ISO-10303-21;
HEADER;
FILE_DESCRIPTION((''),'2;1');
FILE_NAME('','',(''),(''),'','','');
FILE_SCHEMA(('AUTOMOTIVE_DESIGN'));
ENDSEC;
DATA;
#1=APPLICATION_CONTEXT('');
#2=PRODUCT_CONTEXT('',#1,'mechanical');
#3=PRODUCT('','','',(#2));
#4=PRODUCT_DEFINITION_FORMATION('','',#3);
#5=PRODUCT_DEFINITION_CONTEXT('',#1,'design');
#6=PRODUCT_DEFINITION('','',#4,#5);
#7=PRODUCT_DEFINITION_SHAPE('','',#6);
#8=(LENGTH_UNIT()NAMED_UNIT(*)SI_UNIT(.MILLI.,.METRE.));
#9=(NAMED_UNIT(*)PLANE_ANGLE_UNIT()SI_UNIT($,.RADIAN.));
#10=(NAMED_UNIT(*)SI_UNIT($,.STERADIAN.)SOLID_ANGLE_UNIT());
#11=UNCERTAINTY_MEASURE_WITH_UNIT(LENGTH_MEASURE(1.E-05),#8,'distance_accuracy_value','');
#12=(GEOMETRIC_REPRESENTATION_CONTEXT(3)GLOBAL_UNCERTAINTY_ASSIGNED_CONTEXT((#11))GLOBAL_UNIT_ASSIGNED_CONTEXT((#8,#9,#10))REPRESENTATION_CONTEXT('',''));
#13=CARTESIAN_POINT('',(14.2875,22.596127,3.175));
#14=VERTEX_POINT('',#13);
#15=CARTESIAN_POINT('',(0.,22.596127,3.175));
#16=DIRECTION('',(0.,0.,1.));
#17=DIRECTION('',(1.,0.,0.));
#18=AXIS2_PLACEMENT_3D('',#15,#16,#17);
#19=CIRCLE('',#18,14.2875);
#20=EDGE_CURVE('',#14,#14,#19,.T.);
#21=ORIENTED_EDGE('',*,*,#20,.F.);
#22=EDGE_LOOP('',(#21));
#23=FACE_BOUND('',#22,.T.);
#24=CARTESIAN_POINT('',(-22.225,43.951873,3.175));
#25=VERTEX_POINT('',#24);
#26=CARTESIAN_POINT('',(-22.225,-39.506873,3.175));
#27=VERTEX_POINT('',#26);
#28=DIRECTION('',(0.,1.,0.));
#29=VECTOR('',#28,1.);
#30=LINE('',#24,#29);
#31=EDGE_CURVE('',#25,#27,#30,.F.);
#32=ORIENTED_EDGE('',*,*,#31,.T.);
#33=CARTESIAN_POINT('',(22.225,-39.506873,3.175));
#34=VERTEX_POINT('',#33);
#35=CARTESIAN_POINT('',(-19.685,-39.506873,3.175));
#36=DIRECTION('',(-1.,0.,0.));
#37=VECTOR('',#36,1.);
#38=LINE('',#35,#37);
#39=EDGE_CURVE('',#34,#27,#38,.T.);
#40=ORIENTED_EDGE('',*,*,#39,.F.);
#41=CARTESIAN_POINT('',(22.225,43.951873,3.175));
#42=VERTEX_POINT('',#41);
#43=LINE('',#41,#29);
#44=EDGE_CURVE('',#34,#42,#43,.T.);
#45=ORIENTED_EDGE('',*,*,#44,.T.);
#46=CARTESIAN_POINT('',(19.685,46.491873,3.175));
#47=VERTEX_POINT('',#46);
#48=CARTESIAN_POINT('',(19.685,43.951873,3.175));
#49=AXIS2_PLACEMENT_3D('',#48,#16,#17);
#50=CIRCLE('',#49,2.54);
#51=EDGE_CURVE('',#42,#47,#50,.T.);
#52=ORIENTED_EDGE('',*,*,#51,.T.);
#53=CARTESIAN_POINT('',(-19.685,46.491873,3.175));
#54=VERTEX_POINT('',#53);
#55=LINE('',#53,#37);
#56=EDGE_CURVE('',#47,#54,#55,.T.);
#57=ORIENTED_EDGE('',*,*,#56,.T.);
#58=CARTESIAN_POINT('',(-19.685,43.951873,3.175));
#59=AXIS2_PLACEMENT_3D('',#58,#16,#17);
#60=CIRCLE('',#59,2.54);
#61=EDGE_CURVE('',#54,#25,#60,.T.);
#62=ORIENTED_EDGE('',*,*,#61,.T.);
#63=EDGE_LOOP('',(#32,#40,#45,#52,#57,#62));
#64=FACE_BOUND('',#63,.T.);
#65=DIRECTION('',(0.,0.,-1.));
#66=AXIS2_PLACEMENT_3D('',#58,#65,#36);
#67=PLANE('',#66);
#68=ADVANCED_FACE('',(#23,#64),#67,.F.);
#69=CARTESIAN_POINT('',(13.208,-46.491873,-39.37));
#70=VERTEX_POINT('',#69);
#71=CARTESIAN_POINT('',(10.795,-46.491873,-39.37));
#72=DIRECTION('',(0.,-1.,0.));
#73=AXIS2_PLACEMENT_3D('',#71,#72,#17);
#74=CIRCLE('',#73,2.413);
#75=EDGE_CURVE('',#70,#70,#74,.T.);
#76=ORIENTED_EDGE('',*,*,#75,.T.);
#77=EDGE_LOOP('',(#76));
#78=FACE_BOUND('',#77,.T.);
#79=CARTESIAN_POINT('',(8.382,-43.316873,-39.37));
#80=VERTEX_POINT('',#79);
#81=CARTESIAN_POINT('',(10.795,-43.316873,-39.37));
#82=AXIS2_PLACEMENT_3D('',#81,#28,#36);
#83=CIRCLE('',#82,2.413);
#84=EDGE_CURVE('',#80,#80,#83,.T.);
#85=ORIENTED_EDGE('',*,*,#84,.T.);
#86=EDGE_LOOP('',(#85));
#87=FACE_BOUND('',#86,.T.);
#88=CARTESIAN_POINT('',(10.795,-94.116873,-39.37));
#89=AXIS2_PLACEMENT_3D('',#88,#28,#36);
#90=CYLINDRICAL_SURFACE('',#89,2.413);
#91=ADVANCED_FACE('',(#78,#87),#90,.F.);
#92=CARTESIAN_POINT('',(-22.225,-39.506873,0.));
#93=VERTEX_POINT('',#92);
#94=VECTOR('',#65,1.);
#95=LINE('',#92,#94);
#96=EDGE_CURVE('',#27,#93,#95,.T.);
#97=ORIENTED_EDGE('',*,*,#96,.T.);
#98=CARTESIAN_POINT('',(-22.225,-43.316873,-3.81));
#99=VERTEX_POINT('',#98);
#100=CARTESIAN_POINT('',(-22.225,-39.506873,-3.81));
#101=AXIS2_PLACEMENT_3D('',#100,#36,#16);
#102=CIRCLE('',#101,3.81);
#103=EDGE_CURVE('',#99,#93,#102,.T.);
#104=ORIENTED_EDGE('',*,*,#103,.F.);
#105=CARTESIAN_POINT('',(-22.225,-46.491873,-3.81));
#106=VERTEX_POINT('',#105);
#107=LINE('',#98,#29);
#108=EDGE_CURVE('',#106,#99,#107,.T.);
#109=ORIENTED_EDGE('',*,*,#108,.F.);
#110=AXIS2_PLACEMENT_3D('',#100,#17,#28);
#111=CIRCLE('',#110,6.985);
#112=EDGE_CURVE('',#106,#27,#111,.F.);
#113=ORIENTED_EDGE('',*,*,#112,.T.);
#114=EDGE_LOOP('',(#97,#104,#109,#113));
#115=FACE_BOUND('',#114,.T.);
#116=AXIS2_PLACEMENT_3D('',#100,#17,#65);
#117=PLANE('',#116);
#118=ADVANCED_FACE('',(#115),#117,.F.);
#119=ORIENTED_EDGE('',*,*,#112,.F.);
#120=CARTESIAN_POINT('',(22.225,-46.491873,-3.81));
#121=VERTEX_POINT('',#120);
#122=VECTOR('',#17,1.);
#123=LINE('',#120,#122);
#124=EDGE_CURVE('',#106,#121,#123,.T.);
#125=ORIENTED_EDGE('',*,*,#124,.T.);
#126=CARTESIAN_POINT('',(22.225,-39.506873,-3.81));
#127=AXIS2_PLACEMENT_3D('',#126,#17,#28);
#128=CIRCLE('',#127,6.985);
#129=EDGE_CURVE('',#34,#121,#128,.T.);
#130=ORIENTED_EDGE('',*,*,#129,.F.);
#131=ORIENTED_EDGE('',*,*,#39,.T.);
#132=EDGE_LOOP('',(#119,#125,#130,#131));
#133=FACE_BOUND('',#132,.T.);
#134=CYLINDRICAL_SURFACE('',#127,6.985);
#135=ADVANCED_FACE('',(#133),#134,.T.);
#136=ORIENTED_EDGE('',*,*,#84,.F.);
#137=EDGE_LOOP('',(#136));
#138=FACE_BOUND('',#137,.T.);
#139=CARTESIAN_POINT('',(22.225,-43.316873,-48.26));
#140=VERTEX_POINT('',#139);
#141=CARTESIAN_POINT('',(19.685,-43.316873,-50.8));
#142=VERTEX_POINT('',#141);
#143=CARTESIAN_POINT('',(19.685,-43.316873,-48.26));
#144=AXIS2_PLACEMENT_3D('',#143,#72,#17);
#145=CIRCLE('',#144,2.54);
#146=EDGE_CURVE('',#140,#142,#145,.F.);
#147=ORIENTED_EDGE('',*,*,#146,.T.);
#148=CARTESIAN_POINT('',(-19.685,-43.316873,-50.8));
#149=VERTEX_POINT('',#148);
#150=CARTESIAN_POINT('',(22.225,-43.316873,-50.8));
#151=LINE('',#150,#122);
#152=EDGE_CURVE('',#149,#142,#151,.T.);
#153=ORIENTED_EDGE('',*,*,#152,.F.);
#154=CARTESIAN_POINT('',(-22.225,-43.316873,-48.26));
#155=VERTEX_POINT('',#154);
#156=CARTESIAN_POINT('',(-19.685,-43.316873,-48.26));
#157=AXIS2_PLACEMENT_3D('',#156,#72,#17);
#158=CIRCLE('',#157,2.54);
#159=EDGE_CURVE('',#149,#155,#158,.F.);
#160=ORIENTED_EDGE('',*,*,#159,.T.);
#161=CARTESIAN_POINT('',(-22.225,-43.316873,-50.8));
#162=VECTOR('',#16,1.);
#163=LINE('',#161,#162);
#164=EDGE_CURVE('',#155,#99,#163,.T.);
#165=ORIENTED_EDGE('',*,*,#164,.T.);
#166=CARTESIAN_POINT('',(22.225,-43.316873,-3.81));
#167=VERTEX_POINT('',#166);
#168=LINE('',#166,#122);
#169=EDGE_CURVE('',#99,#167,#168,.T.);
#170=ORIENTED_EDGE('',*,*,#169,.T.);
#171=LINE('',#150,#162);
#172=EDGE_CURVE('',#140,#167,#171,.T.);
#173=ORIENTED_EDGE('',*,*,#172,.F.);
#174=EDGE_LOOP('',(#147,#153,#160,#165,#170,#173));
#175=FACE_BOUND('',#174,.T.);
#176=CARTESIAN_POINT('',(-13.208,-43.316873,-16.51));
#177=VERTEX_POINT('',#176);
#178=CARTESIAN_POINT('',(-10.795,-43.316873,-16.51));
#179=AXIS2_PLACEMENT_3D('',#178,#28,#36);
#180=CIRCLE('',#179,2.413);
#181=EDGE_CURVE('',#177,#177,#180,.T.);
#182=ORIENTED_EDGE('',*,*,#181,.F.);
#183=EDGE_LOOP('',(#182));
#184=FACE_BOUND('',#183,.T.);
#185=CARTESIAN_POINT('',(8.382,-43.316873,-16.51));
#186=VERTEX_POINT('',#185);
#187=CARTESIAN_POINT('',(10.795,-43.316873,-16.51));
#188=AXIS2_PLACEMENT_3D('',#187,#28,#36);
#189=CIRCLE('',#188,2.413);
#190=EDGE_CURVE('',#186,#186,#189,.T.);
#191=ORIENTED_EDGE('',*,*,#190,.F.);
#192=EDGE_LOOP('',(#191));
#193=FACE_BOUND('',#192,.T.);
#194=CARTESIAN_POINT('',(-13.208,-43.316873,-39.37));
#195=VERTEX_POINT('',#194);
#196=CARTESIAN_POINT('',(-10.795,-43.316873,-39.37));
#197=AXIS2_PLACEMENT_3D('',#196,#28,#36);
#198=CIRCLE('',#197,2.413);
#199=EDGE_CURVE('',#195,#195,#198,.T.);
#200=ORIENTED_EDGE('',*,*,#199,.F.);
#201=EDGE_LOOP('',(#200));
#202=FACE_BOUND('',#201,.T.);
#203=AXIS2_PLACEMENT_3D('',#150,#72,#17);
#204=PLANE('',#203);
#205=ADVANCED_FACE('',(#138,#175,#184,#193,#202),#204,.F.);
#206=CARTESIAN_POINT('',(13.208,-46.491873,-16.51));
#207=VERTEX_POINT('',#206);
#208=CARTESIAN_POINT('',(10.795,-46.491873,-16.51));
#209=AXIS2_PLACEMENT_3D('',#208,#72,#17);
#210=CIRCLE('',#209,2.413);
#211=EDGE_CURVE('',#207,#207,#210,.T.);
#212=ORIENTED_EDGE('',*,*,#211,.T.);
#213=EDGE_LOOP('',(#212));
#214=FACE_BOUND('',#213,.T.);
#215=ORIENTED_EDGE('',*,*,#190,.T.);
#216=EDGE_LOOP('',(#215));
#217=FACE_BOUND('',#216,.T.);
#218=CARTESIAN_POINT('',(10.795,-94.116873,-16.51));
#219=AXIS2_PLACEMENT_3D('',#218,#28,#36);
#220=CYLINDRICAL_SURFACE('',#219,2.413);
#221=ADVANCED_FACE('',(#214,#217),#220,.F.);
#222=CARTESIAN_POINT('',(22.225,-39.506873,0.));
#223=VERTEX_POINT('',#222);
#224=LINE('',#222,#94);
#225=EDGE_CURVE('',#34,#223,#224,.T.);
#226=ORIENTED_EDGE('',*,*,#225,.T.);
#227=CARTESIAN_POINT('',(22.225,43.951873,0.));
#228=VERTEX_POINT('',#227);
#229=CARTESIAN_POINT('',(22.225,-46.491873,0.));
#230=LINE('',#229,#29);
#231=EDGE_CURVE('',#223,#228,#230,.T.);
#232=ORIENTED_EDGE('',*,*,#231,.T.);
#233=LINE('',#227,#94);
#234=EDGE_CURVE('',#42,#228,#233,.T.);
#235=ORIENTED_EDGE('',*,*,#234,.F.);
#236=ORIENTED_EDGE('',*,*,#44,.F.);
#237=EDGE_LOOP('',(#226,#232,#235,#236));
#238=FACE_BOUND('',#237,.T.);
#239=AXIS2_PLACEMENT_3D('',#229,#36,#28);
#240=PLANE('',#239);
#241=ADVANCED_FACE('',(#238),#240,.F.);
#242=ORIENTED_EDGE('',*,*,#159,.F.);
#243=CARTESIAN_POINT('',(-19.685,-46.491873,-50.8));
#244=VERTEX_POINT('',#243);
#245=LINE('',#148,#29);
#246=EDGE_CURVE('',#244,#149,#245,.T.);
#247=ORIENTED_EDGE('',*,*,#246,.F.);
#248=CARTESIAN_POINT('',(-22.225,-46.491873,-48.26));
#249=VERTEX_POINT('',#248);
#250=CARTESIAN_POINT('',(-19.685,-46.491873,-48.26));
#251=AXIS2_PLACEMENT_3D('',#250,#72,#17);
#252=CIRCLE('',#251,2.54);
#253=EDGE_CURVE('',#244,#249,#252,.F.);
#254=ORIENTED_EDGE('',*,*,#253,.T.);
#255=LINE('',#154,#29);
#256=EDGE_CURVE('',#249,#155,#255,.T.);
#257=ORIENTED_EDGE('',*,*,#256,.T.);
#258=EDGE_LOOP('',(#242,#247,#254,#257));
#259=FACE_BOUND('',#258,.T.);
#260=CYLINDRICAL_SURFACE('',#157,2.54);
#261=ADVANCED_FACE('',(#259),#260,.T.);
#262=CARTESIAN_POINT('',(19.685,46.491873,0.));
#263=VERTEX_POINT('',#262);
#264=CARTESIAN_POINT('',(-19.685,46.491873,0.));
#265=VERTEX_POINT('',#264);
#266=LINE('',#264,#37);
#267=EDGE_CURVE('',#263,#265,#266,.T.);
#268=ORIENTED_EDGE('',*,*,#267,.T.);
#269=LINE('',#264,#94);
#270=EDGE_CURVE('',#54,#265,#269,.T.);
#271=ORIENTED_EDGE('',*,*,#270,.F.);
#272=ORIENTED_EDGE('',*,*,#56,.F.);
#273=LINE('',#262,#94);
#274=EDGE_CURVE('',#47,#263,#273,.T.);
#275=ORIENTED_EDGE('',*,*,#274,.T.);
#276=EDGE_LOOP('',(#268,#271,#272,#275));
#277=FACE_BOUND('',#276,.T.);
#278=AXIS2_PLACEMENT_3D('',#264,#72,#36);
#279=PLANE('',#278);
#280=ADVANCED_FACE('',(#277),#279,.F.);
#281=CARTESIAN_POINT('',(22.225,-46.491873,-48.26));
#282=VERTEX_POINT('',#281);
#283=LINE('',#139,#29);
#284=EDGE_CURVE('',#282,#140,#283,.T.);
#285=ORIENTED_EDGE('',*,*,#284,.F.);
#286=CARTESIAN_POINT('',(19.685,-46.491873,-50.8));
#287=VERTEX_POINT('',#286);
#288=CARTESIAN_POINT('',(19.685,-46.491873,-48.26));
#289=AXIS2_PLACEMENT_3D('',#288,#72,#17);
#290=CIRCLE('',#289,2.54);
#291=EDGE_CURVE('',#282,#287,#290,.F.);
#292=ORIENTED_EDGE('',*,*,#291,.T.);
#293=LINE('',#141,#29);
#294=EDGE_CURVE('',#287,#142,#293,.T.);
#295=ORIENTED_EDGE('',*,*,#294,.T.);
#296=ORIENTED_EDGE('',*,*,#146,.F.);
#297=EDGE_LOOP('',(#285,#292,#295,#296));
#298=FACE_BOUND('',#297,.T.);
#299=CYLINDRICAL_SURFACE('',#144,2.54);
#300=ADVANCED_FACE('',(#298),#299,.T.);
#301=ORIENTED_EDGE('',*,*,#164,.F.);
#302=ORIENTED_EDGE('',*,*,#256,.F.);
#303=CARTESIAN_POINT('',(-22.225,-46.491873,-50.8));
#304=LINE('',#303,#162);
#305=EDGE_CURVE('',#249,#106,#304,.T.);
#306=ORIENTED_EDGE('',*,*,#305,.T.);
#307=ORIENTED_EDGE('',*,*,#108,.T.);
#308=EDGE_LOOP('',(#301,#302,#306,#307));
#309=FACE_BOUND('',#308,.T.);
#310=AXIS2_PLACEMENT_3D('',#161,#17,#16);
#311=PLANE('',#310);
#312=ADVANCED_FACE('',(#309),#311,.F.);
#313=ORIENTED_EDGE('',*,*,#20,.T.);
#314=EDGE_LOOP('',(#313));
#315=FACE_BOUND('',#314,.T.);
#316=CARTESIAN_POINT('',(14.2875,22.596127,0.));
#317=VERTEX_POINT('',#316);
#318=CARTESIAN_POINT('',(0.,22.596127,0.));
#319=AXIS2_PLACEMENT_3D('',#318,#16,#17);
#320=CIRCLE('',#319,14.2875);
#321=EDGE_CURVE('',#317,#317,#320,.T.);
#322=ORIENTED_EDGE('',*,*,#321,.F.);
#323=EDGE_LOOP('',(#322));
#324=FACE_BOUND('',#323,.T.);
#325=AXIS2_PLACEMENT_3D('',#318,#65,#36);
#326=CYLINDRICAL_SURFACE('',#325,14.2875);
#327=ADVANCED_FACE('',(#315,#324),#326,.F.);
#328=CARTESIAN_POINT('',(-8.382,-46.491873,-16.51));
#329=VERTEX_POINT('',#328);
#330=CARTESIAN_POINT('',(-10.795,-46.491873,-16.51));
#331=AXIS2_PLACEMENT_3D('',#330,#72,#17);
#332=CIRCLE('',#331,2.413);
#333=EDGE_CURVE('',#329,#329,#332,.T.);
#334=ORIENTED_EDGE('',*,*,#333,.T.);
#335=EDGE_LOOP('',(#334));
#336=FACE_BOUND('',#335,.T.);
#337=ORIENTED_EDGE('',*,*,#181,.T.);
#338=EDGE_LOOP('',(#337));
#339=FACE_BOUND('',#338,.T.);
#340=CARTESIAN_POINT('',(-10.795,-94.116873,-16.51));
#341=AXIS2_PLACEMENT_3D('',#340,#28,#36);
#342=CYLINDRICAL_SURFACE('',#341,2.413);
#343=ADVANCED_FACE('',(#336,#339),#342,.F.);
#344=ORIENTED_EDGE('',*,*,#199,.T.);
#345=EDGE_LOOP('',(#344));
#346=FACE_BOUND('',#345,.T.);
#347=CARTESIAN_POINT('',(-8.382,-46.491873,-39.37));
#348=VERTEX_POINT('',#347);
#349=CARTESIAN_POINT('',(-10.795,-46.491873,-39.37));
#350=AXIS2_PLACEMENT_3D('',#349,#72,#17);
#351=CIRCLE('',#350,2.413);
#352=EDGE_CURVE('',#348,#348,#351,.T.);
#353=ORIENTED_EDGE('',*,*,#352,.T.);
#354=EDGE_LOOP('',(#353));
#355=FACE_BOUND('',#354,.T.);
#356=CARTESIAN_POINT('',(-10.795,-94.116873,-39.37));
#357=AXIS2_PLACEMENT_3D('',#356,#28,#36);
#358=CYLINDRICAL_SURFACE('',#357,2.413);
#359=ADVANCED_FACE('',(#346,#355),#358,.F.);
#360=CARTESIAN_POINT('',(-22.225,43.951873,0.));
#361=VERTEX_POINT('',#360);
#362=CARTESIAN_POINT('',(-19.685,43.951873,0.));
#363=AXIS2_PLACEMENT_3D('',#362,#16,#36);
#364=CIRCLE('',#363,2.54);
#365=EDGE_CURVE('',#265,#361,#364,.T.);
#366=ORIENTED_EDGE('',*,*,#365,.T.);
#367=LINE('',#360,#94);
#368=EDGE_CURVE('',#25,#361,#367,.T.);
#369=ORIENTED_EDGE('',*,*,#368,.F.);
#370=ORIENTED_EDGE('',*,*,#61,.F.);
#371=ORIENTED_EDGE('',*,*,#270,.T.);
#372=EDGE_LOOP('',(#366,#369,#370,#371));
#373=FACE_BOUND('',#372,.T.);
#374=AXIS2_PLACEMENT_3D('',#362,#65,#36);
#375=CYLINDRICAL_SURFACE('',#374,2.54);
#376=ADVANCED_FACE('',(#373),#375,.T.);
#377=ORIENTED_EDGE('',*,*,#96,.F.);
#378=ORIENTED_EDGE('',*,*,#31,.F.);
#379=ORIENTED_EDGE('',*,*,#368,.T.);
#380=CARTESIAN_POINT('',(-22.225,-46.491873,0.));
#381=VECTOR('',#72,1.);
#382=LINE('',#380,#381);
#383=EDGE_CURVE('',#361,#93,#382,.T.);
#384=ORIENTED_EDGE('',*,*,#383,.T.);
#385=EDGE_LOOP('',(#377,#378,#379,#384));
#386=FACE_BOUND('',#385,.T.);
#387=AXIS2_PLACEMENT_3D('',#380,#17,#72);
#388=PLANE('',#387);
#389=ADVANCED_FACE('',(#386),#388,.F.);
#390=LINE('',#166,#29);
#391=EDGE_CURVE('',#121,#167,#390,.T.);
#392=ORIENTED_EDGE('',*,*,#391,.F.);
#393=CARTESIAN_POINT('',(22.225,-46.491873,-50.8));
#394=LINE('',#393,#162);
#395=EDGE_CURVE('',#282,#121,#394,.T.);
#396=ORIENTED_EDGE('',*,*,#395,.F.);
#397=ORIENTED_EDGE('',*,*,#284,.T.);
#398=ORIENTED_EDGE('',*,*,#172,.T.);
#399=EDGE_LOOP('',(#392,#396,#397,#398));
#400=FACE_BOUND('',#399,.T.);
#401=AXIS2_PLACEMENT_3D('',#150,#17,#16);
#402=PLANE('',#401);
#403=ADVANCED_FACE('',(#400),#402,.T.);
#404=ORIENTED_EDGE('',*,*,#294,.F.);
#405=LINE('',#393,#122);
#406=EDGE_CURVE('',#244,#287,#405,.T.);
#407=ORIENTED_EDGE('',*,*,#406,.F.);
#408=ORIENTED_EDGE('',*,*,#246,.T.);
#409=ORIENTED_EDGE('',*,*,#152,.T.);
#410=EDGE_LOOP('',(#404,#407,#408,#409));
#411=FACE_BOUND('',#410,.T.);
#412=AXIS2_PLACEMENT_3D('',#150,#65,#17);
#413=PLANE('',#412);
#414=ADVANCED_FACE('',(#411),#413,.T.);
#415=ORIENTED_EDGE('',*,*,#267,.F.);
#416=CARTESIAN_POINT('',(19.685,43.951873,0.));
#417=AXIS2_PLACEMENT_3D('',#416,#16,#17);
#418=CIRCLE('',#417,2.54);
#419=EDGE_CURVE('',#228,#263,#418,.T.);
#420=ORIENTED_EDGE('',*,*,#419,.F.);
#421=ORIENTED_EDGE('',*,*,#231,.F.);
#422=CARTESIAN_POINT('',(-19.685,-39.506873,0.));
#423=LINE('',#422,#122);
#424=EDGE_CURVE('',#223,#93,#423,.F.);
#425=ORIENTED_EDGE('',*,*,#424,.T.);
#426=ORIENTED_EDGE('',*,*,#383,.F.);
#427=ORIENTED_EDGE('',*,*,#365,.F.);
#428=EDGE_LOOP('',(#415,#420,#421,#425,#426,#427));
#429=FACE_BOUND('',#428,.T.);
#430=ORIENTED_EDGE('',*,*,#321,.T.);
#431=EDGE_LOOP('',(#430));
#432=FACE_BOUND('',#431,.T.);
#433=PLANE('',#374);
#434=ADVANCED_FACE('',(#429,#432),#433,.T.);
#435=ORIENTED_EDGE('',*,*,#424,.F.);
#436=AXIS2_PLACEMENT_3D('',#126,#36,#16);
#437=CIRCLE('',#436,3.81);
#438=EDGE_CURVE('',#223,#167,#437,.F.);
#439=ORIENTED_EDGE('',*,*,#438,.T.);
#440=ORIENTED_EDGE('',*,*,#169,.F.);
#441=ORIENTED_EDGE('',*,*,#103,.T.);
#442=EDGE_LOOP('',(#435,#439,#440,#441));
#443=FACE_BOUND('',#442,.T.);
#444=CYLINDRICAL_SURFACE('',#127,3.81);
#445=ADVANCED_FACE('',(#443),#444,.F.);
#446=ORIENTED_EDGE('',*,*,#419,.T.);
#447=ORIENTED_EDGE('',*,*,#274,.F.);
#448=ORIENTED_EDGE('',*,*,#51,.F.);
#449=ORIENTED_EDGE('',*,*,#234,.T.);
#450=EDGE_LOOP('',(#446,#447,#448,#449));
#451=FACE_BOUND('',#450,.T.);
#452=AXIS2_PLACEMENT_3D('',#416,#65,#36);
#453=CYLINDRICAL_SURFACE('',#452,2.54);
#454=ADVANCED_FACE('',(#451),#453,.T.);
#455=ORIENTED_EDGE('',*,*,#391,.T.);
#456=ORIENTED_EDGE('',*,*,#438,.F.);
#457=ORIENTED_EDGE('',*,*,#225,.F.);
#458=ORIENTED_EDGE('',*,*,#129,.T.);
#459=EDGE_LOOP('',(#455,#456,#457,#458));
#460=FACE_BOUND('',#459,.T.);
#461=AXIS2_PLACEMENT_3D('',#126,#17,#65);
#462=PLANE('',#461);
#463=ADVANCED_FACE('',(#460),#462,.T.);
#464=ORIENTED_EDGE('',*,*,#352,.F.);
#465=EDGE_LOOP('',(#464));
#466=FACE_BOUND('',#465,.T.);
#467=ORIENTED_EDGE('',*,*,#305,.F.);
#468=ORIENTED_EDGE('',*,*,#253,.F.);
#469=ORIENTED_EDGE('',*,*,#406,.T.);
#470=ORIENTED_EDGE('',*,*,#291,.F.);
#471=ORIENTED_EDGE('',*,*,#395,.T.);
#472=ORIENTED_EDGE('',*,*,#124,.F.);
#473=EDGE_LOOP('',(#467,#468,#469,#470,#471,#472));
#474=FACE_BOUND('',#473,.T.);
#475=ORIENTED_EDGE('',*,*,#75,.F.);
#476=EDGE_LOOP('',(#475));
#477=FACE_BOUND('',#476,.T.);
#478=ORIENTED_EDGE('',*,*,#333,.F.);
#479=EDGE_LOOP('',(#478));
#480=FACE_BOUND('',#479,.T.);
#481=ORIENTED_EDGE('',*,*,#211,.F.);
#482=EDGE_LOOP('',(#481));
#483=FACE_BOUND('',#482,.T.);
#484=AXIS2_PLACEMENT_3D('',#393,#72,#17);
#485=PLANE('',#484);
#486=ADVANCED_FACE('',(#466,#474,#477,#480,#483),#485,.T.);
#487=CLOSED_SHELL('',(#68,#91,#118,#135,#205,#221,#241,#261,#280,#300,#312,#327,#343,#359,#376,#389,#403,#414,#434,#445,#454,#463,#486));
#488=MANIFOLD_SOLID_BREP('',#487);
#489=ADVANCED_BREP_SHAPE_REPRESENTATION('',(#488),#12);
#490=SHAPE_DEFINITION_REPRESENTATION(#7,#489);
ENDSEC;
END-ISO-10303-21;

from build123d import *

# Parameters (mm, degrees)
SKETCH1_R              = 14.2875
BOSS_EXTRUDE1_DEPTH    = 3.175
SKETCH2_W              = 44.45
SKETCH2_H              = 3.175
BOSS_EXTRUDE2_DEPTH    = 50.8
FILLET1_R              = 2.54
CONVERT_SOLID1_START   = -22.225
CONVERT_SOLID1_DEPTH   = 44.45
CONVERT_SOLID1_2_DEPTH = 44.45
SKETCH7_R              = 2.413
CUT_EXTRUDE1_DEPTH     = 50.8


# Read off the part's stored shape, not the designer's step: Convert-Solid1
with BuildPart() as part:
    # Sketch1 → Boss-Extrude1 (new body)
    with BuildSketch(Plane.XY):
        with BuildLine():
            Line((-22.225, -46.491872792), (22.225, -46.491872792))
            Line((22.225, -46.491872792), (22.225, 43.951872792))
            ThreePointArc((22.225, 43.951872792), (21.481051224, 45.747924016), (19.685, 46.491872792))
            Line((19.685, 46.491872792), (-19.685, 46.491872792))
            ThreePointArc((-19.685, 46.491872792), (-21.481051224, 45.747924016), (-22.225, 43.951872792))
            Line((-22.225, 43.951872792), (-22.225, -46.491872792))
        make_face()
        with Locations((0, 22.596127208)):
            Circle(SKETCH1_R, mode=Mode.SUBTRACT)
    extrude(amount=BOSS_EXTRUDE1_DEPTH)

    # Sketch2 → Boss-Extrude2 (add)
    with BuildSketch(Plane(origin=(0, 0, 0), x_dir=(-1, 0, 0), z_dir=(0, 0, -1))):
        with Locations((0, -44.904372792)):
            Rectangle(SKETCH2_W, SKETCH2_H)
    extrude(amount=BOSS_EXTRUDE2_DEPTH)

    # Fillet1
    fillet1_edges = [part.edges().sort_by_distance(p)[0] for p in [
        (22.225, -44.904372792, -50.8),
        (-22.225, -44.904372792, -50.8),
    ]]
    fillet(fillet1_edges, radius=FILLET1_R)

    # Convert-Solid1 outline → Convert-Solid1 (cut)
    with BuildSketch(Plane.YZ.offset(CONVERT_SOLID1_START)):
        with BuildLine():
            ThreePointArc((-46.491872792, -3.81), (-44.446013659, 1.129140866), (-39.506872792, 3.175))
            Line((-39.506872792, 3.175), (-46.491872792, 3.175))
            Line((-46.491872792, 3.175), (-46.491872792, -3.81))
        make_face()
    extrude(amount=CONVERT_SOLID1_DEPTH, mode=Mode.SUBTRACT)

    # Convert-Solid1 2 outline → Convert-Solid1 2 (add)
    with BuildSketch(Plane.YZ.offset(CONVERT_SOLID1_START)):
        with BuildLine():
            ThreePointArc((-43.316872792, -3.81), (-42.200949628, -1.115923164), (-39.506872792, 0))
            Line((-39.506872792, 0), (-43.316872792, 0))
            Line((-43.316872792, 0), (-43.316872792, -3.81))
        make_face()
    extrude(amount=CONVERT_SOLID1_2_DEPTH)

    # Sketch7 → Cut-Extrude1 (cut)
    with BuildSketch(Plane(origin=(0, -43.316872792, 0), x_dir=(1, 0, 0), z_dir=(0, 1, 0))):
        with Locations(Location((-10.795, 39.37, 0), (0, 0, 180))):
            Circle(SKETCH7_R)
        with Locations(Location((10.795, 39.37, 0), (0, 0, 180))):
            Circle(SKETCH7_R)
        with Locations(Location((-10.795, 16.51, 0), (0, 0, 180))):
            Circle(SKETCH7_R)
        with Locations(Location((10.795, 16.51, 0), (0, 0, 180))):
            Circle(SKETCH7_R)
    extrude(amount=-CUT_EXTRUDE1_DEPTH, mode=Mode.SUBTRACT)


solid = part.part
